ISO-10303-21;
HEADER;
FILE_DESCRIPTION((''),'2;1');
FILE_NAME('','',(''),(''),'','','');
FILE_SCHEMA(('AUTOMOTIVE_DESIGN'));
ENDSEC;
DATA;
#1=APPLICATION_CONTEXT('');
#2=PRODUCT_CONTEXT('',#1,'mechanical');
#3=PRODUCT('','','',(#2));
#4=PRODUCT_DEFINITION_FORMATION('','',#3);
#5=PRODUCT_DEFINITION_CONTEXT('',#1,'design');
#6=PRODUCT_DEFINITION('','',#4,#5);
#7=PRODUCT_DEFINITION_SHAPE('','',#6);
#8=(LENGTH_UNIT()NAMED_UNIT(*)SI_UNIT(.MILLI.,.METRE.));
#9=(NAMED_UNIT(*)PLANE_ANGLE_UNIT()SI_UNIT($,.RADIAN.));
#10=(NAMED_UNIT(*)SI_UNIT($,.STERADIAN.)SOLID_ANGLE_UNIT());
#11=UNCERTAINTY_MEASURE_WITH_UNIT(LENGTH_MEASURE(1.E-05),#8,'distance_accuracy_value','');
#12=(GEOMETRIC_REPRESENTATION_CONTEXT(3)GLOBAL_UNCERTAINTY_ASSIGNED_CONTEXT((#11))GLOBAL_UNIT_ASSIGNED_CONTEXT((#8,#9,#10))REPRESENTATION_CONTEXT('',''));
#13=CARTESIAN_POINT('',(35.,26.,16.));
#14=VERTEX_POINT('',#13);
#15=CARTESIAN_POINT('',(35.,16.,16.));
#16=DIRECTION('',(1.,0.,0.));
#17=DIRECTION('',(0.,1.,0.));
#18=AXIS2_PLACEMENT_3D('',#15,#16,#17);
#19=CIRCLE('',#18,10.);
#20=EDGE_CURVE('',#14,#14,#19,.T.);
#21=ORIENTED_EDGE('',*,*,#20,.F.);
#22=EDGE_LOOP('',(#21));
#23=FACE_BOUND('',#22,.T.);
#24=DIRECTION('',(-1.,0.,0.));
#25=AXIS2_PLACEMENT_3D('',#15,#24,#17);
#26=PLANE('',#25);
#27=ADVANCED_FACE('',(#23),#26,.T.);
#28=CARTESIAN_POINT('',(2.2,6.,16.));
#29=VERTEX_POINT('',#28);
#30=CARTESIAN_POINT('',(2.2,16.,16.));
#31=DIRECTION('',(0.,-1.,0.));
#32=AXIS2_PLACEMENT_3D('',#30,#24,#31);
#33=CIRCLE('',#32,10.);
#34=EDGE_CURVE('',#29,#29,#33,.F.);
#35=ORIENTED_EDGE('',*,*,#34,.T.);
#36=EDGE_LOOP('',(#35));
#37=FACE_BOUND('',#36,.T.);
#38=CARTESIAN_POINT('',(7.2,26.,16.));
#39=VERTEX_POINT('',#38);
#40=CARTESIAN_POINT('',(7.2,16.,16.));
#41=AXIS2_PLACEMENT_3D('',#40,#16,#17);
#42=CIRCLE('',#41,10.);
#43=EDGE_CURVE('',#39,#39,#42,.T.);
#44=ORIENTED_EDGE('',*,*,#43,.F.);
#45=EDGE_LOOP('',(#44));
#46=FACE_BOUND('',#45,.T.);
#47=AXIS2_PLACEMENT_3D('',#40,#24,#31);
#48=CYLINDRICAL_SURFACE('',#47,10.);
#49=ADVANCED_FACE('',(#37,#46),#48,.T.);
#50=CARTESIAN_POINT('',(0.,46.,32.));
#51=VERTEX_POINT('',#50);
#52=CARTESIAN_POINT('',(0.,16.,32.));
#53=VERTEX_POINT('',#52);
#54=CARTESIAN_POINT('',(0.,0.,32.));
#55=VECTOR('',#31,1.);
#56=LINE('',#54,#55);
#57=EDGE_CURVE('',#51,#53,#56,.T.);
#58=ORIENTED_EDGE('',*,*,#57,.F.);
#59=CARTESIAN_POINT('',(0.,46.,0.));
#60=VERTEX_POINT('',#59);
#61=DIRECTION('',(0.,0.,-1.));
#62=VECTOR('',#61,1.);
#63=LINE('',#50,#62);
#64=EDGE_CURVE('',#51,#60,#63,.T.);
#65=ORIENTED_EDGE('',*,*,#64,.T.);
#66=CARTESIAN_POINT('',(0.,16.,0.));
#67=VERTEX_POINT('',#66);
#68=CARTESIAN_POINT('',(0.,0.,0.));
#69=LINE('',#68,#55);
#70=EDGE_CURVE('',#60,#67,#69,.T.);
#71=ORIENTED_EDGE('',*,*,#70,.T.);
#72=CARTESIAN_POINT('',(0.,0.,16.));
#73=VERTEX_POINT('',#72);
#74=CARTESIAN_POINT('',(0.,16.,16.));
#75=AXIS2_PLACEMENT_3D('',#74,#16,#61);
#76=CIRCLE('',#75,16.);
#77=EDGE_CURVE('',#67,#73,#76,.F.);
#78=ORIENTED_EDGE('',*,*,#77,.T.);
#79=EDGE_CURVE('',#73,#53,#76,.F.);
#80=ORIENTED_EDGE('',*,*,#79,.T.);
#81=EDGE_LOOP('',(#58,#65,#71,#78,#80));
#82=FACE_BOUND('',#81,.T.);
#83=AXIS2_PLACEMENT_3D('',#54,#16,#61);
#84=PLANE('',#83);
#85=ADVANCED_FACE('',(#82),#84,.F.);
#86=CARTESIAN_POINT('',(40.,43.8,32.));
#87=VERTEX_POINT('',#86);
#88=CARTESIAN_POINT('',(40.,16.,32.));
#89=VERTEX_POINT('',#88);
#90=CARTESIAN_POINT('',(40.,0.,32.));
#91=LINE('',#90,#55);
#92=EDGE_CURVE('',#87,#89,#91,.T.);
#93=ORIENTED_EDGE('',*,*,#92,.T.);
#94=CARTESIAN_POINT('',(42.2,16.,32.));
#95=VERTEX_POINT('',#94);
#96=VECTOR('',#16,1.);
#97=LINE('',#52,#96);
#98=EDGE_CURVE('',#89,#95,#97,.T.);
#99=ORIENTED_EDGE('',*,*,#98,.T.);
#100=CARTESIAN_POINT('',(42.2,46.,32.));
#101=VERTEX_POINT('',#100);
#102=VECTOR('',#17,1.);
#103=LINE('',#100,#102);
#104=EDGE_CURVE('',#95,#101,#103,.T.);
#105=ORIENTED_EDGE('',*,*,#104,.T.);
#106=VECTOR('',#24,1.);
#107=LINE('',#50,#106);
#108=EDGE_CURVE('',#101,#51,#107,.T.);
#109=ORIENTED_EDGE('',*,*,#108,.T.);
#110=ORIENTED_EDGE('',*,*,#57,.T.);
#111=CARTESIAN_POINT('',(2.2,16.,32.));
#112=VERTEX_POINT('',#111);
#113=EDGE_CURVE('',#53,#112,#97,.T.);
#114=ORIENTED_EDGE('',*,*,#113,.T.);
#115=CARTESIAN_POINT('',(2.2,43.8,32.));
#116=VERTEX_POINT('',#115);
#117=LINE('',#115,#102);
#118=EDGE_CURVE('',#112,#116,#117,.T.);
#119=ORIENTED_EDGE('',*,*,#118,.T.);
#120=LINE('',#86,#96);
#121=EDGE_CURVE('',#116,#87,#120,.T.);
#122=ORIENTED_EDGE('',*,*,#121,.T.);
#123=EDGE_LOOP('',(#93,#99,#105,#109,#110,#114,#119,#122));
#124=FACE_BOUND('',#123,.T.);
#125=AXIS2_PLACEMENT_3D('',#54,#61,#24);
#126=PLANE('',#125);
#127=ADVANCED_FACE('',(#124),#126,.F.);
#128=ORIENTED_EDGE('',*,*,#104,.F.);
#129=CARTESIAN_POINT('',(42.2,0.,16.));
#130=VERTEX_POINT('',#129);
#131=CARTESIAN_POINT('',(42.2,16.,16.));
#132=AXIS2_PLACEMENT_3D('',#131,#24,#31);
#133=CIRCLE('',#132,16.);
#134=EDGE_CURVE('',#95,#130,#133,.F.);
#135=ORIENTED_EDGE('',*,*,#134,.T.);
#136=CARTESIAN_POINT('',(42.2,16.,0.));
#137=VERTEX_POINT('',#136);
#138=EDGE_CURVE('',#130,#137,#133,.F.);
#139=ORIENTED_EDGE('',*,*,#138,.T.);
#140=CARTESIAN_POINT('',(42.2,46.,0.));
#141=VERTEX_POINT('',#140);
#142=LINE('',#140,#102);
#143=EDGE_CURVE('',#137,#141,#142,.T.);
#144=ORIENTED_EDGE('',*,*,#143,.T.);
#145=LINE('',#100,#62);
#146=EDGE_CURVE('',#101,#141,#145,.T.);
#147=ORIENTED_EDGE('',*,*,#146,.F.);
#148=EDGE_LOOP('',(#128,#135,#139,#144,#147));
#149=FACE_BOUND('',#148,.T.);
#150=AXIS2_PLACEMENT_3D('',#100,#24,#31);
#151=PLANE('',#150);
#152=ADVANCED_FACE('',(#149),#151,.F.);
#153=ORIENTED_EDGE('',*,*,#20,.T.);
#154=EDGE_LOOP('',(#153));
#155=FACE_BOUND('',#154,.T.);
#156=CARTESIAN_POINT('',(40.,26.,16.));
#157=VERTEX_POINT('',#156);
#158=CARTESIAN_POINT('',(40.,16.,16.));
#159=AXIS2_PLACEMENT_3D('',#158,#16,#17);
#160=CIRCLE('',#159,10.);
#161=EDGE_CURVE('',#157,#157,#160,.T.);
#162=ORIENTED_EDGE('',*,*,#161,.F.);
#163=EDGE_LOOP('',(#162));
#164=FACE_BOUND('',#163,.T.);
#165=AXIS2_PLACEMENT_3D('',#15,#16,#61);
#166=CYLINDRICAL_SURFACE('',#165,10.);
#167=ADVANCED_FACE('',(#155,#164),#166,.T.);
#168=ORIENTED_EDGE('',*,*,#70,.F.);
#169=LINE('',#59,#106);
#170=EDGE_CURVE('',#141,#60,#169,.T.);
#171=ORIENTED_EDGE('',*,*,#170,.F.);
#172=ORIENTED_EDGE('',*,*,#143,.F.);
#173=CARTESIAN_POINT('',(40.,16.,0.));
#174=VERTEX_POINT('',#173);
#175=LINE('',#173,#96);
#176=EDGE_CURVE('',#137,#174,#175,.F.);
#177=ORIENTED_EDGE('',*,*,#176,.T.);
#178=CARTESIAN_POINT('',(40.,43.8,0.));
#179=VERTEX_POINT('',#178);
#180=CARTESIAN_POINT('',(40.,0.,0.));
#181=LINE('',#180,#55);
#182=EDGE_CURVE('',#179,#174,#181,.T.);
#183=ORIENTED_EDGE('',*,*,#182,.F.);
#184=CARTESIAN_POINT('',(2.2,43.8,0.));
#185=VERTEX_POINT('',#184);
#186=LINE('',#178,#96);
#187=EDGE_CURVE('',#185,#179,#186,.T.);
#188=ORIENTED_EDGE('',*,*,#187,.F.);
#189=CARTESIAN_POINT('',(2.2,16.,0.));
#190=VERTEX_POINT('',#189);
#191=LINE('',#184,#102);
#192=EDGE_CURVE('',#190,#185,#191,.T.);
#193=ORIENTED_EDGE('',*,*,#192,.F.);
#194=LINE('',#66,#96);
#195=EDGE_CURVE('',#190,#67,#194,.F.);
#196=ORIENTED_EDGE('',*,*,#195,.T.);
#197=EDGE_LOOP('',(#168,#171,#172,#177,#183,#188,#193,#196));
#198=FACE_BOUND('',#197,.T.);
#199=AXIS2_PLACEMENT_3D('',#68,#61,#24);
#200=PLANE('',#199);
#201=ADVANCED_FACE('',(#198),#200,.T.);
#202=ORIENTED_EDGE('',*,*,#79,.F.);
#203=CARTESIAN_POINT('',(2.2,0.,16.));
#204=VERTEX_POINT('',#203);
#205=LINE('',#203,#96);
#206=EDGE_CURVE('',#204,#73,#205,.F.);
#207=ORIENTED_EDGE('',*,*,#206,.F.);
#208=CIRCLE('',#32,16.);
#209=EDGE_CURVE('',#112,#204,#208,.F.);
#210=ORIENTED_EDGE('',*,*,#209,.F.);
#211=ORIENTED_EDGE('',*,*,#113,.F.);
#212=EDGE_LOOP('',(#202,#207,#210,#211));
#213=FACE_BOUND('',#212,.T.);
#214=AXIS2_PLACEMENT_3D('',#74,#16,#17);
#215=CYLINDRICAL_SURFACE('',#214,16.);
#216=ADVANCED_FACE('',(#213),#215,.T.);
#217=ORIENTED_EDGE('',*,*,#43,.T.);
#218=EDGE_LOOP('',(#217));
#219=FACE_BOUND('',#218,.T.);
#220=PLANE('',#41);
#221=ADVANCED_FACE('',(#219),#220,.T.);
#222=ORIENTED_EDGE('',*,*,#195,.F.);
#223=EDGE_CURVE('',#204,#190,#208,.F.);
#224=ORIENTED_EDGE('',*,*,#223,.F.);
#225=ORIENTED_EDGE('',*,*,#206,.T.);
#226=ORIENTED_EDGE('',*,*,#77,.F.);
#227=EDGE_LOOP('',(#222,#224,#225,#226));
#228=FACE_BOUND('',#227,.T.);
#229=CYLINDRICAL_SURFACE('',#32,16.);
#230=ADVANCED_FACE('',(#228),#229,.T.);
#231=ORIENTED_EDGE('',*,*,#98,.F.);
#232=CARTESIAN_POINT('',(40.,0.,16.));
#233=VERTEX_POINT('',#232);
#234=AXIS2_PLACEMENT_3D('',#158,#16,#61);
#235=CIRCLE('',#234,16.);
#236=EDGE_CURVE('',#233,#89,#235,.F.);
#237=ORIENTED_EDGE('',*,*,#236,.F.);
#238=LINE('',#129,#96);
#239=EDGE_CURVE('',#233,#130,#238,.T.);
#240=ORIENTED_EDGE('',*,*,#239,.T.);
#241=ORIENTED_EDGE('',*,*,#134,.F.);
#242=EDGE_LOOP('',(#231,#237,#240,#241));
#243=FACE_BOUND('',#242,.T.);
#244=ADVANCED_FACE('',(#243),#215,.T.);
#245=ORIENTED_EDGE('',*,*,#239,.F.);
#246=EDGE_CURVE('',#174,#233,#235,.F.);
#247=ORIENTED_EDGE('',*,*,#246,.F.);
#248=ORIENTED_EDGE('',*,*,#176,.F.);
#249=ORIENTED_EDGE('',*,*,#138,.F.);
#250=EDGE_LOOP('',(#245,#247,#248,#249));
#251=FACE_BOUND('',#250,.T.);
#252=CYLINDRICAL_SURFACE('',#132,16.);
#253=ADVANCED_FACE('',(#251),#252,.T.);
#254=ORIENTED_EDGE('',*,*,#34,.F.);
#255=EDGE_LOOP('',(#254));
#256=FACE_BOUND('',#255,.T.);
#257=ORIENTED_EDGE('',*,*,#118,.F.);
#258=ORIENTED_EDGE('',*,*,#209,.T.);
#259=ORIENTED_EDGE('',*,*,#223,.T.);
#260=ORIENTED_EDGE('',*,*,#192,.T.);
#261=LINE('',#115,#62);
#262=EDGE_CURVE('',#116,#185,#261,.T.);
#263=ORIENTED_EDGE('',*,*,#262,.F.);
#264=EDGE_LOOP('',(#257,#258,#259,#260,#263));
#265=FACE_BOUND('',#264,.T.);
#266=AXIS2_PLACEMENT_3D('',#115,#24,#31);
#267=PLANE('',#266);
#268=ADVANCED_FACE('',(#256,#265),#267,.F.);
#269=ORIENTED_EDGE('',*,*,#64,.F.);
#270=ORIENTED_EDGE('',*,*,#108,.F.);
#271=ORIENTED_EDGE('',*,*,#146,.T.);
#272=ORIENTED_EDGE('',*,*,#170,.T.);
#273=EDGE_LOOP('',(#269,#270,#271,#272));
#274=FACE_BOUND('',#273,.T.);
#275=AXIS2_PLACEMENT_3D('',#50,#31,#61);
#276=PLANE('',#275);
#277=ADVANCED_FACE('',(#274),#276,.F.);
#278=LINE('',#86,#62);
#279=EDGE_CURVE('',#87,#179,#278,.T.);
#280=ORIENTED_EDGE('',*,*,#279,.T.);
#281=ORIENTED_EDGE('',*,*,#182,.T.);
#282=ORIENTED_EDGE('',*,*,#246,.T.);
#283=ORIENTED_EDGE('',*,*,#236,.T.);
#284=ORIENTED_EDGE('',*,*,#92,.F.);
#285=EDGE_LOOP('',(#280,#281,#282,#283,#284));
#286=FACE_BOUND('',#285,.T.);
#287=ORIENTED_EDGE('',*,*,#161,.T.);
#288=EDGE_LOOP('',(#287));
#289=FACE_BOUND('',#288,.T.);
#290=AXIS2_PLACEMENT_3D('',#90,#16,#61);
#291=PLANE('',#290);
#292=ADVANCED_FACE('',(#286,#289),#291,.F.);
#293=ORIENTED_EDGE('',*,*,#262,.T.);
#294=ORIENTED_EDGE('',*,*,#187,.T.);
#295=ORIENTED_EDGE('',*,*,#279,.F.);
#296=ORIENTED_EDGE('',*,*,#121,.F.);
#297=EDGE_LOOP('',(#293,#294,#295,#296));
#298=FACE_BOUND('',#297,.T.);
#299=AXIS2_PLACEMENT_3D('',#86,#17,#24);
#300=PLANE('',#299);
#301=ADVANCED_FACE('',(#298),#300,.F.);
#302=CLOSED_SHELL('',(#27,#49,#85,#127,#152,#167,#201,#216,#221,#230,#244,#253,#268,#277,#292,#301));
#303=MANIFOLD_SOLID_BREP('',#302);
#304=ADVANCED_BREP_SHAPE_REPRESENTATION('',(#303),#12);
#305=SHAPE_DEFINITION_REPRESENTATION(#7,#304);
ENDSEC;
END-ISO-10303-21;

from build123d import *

# Parameters (mm, degrees)
BOSS_EXTRUDE1_DEPTH = 32
FILLET1_R           = 16
SKETCH4_R           = 10
BOSS_EXTRUDE4_DEPTH = 5


with BuildPart() as part:
    # Sketch1 → Boss-Extrude1 (new body)
    with BuildSketch(Plane.XY):
        Polygon((0, 0), (0, 46), (42.2, 46), (42.2, 0), (40, 0), (40, 43.8), (2.2, 43.8), (2.2, 0), align=None)
    extrude(amount=BOSS_EXTRUDE1_DEPTH)

    # Fillet1
    fillet1_edges = [part.edges().sort_by_distance(p)[0] for p in [
        (41.1, 0, 32),
        (41.1, 0, 0),
        (1.1, 0, 0),
        (1.1, 0, 32),
    ]]
    fillet(fillet1_edges, radius=FILLET1_R - 0.0001)  # a hair under: the kernel refuses the full size

    # Sketch4 → Boss-Extrude4 (add)
    with BuildSketch(Plane(origin=(2.2, 0, 0), x_dir=(0, 0, -1), z_dir=(1, 0, 0))):
        with Locations(Location((-16, 16, 0), (0, 0, 270))):
            Circle(SKETCH4_R)
    boss_extrude4 = extrude(amount=BOSS_EXTRUDE4_DEPTH)

    # Mirror1: Boss-Extrude4 across plane
    add(boss_extrude4.mirror(Plane(origin=(21.1, 0, 0), x_dir=(0, 0, 1), z_dir=(1, 0, 0))))


solid = part.part
